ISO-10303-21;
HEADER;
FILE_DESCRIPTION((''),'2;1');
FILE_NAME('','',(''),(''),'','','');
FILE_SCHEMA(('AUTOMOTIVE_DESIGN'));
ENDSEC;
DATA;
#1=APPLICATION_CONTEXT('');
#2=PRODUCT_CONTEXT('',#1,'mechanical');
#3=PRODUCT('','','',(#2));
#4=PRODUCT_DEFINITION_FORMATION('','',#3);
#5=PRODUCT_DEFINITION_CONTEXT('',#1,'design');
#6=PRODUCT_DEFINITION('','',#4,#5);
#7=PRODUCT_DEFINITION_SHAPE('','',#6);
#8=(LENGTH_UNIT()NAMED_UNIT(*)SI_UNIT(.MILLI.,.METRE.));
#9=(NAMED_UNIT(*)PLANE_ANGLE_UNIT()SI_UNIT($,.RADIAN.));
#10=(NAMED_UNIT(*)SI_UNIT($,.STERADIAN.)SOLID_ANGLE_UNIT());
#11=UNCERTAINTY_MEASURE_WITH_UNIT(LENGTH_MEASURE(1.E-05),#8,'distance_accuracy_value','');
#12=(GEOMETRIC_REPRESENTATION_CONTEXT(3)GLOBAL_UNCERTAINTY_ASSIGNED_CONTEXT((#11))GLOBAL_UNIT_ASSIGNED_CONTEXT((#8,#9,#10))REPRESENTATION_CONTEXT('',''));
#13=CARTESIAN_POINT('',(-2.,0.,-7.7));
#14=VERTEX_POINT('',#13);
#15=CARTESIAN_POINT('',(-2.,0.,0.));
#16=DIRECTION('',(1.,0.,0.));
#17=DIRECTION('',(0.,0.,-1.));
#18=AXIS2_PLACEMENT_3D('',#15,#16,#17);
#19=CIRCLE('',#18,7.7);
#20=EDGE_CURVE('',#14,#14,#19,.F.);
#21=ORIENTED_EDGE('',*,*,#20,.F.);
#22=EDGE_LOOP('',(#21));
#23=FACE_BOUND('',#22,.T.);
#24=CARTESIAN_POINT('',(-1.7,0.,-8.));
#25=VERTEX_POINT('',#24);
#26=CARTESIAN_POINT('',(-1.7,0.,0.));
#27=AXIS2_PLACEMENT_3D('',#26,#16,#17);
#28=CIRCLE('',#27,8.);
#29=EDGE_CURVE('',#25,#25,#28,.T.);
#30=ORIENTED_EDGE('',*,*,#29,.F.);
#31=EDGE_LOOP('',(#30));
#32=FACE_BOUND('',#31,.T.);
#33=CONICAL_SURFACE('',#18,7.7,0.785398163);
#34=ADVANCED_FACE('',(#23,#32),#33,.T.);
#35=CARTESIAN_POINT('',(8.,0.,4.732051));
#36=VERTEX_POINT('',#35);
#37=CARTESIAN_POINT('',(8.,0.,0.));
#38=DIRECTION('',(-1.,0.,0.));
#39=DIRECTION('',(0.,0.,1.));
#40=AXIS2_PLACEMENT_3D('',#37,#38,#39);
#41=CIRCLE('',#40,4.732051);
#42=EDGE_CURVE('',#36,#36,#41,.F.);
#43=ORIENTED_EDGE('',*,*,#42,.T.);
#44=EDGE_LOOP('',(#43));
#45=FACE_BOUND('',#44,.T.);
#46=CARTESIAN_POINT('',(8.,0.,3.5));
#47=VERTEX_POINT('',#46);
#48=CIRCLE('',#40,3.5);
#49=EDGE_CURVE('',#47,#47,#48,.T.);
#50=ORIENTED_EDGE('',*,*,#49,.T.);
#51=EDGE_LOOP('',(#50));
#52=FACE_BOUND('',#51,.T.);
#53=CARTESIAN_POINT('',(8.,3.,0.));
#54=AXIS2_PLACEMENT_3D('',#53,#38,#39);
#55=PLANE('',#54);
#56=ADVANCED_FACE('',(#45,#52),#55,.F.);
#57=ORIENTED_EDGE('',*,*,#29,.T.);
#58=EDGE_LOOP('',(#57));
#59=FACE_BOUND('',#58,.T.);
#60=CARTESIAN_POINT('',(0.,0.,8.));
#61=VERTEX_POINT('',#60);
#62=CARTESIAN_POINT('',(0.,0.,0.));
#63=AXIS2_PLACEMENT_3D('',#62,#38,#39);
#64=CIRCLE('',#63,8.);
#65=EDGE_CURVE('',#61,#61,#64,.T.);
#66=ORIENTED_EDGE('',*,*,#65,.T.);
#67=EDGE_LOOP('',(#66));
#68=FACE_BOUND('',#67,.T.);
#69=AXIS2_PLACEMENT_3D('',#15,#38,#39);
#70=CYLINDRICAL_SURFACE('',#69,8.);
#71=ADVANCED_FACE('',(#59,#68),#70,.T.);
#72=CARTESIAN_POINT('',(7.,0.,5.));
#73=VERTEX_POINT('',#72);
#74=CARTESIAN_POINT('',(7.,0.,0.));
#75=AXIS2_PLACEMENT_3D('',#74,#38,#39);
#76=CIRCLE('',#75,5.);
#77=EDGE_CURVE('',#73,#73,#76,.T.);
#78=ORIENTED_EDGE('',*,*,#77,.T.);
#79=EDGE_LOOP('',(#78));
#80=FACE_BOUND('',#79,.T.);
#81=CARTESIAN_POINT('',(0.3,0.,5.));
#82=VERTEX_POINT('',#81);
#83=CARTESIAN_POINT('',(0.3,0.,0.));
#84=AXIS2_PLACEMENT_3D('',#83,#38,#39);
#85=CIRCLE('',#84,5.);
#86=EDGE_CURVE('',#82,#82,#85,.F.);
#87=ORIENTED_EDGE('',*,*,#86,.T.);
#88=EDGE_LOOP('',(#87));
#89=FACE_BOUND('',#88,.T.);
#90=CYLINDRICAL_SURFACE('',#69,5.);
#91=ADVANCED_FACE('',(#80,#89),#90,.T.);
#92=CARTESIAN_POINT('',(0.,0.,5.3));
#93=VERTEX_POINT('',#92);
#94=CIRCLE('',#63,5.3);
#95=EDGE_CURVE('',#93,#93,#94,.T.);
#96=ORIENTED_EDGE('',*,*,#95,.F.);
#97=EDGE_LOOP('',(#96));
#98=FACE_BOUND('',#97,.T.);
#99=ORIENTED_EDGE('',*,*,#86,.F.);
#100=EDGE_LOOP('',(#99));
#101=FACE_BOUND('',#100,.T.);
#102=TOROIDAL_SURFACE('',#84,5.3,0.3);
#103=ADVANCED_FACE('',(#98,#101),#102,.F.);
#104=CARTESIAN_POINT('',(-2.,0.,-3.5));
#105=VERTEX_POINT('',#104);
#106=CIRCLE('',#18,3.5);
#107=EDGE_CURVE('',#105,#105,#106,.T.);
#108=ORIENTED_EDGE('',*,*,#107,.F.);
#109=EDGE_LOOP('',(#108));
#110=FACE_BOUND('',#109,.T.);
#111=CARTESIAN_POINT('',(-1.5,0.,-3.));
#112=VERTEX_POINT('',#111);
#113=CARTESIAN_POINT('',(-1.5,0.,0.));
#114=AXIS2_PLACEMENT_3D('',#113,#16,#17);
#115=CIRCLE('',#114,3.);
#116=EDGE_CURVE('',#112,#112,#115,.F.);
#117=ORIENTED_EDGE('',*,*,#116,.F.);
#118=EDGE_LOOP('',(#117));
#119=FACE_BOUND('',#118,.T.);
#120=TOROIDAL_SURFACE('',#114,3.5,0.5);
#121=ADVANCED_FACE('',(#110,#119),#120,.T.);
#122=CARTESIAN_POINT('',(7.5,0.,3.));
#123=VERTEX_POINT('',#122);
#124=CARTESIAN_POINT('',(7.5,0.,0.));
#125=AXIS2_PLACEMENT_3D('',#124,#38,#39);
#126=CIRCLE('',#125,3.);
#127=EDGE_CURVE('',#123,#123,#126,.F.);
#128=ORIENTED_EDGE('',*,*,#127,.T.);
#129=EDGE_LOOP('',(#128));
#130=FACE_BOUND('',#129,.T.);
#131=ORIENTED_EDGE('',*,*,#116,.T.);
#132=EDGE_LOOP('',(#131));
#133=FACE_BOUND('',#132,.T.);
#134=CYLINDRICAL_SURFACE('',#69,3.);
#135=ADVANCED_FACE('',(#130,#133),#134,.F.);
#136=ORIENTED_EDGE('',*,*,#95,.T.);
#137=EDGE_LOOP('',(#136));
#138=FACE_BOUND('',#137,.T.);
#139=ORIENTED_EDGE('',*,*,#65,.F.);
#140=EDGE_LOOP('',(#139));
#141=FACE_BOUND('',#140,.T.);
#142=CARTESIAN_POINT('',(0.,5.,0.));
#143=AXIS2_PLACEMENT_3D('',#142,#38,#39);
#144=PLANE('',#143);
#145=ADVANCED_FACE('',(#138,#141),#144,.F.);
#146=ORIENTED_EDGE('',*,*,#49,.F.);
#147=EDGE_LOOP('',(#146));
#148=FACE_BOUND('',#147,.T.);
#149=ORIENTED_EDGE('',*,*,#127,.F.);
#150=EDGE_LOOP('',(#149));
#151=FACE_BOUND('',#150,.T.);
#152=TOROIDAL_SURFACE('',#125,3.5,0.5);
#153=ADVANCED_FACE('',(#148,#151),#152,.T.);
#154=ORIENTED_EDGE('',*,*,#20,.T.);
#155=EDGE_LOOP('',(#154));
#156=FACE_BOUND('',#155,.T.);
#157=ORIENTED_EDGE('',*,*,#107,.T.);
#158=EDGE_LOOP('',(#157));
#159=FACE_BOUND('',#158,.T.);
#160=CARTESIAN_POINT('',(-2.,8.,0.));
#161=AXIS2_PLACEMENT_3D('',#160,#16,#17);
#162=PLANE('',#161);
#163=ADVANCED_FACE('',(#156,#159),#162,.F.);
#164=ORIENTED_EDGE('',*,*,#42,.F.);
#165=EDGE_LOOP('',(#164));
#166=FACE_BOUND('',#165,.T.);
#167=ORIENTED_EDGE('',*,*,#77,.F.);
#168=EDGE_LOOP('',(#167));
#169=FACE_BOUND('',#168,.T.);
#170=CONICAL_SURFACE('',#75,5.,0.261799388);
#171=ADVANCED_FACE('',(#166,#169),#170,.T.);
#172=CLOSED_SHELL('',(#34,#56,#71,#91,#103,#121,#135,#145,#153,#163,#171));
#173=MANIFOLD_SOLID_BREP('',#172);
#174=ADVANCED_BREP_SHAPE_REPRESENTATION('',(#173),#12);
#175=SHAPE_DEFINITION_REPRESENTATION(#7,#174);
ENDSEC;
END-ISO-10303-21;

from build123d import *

# Parameters (mm, degrees)
CHAMFER1_SIZE  = 0.3
FILLET1_R      = 0.3
CHAMFER3_SIZE  = 1
CHAMFER3_SIZE2 = 0.267949192
FILLET5_R      = 0.5


with BuildPart() as part:
    # Sketch1 → Revolve1 (revolve)
    with BuildSketch(Plane.XY):
        Polygon((-2, 3), (8, 3), (8, 5), (0, 5), (0, 8), (-2, 8), align=None)
    revolve(axis=Axis((-2, 0, 0), (1, 0, 0)))

    # Chamfer1
    chamfer1_edges = [part.edges().sort_by_distance(p)[0] for p in [
        (-2, -8, 0),
    ]]
    chamfer(chamfer1_edges, length=CHAMFER1_SIZE)

    # Fillet1
    fillet1_edges = [part.edges().sort_by_distance(p)[0] for p in [
        (0, -5, 0),
    ]]
    fillet(fillet1_edges, radius=FILLET1_R)

    # Chamfer3
    chamfer3_edges = [part.edges().sort_by_distance(p)[0] for p in [
        (8, -5, 0),
    ]]
    chamfer3_side = [part.faces().sort_by_distance(p)[0] for p in [
        (4.15, -5, 0),
    ]]
    chamfer(chamfer3_edges, length=CHAMFER3_SIZE, length2=CHAMFER3_SIZE2, reference=chamfer3_side[0])

    # Fillet5
    fillet5_edges = [part.edges().sort_by_distance(p)[0] for p in [
        (8, -3, 0),
        (-2, -3, 0),
    ]]
    fillet(fillet5_edges, radius=FILLET5_R)


solid = part.part
